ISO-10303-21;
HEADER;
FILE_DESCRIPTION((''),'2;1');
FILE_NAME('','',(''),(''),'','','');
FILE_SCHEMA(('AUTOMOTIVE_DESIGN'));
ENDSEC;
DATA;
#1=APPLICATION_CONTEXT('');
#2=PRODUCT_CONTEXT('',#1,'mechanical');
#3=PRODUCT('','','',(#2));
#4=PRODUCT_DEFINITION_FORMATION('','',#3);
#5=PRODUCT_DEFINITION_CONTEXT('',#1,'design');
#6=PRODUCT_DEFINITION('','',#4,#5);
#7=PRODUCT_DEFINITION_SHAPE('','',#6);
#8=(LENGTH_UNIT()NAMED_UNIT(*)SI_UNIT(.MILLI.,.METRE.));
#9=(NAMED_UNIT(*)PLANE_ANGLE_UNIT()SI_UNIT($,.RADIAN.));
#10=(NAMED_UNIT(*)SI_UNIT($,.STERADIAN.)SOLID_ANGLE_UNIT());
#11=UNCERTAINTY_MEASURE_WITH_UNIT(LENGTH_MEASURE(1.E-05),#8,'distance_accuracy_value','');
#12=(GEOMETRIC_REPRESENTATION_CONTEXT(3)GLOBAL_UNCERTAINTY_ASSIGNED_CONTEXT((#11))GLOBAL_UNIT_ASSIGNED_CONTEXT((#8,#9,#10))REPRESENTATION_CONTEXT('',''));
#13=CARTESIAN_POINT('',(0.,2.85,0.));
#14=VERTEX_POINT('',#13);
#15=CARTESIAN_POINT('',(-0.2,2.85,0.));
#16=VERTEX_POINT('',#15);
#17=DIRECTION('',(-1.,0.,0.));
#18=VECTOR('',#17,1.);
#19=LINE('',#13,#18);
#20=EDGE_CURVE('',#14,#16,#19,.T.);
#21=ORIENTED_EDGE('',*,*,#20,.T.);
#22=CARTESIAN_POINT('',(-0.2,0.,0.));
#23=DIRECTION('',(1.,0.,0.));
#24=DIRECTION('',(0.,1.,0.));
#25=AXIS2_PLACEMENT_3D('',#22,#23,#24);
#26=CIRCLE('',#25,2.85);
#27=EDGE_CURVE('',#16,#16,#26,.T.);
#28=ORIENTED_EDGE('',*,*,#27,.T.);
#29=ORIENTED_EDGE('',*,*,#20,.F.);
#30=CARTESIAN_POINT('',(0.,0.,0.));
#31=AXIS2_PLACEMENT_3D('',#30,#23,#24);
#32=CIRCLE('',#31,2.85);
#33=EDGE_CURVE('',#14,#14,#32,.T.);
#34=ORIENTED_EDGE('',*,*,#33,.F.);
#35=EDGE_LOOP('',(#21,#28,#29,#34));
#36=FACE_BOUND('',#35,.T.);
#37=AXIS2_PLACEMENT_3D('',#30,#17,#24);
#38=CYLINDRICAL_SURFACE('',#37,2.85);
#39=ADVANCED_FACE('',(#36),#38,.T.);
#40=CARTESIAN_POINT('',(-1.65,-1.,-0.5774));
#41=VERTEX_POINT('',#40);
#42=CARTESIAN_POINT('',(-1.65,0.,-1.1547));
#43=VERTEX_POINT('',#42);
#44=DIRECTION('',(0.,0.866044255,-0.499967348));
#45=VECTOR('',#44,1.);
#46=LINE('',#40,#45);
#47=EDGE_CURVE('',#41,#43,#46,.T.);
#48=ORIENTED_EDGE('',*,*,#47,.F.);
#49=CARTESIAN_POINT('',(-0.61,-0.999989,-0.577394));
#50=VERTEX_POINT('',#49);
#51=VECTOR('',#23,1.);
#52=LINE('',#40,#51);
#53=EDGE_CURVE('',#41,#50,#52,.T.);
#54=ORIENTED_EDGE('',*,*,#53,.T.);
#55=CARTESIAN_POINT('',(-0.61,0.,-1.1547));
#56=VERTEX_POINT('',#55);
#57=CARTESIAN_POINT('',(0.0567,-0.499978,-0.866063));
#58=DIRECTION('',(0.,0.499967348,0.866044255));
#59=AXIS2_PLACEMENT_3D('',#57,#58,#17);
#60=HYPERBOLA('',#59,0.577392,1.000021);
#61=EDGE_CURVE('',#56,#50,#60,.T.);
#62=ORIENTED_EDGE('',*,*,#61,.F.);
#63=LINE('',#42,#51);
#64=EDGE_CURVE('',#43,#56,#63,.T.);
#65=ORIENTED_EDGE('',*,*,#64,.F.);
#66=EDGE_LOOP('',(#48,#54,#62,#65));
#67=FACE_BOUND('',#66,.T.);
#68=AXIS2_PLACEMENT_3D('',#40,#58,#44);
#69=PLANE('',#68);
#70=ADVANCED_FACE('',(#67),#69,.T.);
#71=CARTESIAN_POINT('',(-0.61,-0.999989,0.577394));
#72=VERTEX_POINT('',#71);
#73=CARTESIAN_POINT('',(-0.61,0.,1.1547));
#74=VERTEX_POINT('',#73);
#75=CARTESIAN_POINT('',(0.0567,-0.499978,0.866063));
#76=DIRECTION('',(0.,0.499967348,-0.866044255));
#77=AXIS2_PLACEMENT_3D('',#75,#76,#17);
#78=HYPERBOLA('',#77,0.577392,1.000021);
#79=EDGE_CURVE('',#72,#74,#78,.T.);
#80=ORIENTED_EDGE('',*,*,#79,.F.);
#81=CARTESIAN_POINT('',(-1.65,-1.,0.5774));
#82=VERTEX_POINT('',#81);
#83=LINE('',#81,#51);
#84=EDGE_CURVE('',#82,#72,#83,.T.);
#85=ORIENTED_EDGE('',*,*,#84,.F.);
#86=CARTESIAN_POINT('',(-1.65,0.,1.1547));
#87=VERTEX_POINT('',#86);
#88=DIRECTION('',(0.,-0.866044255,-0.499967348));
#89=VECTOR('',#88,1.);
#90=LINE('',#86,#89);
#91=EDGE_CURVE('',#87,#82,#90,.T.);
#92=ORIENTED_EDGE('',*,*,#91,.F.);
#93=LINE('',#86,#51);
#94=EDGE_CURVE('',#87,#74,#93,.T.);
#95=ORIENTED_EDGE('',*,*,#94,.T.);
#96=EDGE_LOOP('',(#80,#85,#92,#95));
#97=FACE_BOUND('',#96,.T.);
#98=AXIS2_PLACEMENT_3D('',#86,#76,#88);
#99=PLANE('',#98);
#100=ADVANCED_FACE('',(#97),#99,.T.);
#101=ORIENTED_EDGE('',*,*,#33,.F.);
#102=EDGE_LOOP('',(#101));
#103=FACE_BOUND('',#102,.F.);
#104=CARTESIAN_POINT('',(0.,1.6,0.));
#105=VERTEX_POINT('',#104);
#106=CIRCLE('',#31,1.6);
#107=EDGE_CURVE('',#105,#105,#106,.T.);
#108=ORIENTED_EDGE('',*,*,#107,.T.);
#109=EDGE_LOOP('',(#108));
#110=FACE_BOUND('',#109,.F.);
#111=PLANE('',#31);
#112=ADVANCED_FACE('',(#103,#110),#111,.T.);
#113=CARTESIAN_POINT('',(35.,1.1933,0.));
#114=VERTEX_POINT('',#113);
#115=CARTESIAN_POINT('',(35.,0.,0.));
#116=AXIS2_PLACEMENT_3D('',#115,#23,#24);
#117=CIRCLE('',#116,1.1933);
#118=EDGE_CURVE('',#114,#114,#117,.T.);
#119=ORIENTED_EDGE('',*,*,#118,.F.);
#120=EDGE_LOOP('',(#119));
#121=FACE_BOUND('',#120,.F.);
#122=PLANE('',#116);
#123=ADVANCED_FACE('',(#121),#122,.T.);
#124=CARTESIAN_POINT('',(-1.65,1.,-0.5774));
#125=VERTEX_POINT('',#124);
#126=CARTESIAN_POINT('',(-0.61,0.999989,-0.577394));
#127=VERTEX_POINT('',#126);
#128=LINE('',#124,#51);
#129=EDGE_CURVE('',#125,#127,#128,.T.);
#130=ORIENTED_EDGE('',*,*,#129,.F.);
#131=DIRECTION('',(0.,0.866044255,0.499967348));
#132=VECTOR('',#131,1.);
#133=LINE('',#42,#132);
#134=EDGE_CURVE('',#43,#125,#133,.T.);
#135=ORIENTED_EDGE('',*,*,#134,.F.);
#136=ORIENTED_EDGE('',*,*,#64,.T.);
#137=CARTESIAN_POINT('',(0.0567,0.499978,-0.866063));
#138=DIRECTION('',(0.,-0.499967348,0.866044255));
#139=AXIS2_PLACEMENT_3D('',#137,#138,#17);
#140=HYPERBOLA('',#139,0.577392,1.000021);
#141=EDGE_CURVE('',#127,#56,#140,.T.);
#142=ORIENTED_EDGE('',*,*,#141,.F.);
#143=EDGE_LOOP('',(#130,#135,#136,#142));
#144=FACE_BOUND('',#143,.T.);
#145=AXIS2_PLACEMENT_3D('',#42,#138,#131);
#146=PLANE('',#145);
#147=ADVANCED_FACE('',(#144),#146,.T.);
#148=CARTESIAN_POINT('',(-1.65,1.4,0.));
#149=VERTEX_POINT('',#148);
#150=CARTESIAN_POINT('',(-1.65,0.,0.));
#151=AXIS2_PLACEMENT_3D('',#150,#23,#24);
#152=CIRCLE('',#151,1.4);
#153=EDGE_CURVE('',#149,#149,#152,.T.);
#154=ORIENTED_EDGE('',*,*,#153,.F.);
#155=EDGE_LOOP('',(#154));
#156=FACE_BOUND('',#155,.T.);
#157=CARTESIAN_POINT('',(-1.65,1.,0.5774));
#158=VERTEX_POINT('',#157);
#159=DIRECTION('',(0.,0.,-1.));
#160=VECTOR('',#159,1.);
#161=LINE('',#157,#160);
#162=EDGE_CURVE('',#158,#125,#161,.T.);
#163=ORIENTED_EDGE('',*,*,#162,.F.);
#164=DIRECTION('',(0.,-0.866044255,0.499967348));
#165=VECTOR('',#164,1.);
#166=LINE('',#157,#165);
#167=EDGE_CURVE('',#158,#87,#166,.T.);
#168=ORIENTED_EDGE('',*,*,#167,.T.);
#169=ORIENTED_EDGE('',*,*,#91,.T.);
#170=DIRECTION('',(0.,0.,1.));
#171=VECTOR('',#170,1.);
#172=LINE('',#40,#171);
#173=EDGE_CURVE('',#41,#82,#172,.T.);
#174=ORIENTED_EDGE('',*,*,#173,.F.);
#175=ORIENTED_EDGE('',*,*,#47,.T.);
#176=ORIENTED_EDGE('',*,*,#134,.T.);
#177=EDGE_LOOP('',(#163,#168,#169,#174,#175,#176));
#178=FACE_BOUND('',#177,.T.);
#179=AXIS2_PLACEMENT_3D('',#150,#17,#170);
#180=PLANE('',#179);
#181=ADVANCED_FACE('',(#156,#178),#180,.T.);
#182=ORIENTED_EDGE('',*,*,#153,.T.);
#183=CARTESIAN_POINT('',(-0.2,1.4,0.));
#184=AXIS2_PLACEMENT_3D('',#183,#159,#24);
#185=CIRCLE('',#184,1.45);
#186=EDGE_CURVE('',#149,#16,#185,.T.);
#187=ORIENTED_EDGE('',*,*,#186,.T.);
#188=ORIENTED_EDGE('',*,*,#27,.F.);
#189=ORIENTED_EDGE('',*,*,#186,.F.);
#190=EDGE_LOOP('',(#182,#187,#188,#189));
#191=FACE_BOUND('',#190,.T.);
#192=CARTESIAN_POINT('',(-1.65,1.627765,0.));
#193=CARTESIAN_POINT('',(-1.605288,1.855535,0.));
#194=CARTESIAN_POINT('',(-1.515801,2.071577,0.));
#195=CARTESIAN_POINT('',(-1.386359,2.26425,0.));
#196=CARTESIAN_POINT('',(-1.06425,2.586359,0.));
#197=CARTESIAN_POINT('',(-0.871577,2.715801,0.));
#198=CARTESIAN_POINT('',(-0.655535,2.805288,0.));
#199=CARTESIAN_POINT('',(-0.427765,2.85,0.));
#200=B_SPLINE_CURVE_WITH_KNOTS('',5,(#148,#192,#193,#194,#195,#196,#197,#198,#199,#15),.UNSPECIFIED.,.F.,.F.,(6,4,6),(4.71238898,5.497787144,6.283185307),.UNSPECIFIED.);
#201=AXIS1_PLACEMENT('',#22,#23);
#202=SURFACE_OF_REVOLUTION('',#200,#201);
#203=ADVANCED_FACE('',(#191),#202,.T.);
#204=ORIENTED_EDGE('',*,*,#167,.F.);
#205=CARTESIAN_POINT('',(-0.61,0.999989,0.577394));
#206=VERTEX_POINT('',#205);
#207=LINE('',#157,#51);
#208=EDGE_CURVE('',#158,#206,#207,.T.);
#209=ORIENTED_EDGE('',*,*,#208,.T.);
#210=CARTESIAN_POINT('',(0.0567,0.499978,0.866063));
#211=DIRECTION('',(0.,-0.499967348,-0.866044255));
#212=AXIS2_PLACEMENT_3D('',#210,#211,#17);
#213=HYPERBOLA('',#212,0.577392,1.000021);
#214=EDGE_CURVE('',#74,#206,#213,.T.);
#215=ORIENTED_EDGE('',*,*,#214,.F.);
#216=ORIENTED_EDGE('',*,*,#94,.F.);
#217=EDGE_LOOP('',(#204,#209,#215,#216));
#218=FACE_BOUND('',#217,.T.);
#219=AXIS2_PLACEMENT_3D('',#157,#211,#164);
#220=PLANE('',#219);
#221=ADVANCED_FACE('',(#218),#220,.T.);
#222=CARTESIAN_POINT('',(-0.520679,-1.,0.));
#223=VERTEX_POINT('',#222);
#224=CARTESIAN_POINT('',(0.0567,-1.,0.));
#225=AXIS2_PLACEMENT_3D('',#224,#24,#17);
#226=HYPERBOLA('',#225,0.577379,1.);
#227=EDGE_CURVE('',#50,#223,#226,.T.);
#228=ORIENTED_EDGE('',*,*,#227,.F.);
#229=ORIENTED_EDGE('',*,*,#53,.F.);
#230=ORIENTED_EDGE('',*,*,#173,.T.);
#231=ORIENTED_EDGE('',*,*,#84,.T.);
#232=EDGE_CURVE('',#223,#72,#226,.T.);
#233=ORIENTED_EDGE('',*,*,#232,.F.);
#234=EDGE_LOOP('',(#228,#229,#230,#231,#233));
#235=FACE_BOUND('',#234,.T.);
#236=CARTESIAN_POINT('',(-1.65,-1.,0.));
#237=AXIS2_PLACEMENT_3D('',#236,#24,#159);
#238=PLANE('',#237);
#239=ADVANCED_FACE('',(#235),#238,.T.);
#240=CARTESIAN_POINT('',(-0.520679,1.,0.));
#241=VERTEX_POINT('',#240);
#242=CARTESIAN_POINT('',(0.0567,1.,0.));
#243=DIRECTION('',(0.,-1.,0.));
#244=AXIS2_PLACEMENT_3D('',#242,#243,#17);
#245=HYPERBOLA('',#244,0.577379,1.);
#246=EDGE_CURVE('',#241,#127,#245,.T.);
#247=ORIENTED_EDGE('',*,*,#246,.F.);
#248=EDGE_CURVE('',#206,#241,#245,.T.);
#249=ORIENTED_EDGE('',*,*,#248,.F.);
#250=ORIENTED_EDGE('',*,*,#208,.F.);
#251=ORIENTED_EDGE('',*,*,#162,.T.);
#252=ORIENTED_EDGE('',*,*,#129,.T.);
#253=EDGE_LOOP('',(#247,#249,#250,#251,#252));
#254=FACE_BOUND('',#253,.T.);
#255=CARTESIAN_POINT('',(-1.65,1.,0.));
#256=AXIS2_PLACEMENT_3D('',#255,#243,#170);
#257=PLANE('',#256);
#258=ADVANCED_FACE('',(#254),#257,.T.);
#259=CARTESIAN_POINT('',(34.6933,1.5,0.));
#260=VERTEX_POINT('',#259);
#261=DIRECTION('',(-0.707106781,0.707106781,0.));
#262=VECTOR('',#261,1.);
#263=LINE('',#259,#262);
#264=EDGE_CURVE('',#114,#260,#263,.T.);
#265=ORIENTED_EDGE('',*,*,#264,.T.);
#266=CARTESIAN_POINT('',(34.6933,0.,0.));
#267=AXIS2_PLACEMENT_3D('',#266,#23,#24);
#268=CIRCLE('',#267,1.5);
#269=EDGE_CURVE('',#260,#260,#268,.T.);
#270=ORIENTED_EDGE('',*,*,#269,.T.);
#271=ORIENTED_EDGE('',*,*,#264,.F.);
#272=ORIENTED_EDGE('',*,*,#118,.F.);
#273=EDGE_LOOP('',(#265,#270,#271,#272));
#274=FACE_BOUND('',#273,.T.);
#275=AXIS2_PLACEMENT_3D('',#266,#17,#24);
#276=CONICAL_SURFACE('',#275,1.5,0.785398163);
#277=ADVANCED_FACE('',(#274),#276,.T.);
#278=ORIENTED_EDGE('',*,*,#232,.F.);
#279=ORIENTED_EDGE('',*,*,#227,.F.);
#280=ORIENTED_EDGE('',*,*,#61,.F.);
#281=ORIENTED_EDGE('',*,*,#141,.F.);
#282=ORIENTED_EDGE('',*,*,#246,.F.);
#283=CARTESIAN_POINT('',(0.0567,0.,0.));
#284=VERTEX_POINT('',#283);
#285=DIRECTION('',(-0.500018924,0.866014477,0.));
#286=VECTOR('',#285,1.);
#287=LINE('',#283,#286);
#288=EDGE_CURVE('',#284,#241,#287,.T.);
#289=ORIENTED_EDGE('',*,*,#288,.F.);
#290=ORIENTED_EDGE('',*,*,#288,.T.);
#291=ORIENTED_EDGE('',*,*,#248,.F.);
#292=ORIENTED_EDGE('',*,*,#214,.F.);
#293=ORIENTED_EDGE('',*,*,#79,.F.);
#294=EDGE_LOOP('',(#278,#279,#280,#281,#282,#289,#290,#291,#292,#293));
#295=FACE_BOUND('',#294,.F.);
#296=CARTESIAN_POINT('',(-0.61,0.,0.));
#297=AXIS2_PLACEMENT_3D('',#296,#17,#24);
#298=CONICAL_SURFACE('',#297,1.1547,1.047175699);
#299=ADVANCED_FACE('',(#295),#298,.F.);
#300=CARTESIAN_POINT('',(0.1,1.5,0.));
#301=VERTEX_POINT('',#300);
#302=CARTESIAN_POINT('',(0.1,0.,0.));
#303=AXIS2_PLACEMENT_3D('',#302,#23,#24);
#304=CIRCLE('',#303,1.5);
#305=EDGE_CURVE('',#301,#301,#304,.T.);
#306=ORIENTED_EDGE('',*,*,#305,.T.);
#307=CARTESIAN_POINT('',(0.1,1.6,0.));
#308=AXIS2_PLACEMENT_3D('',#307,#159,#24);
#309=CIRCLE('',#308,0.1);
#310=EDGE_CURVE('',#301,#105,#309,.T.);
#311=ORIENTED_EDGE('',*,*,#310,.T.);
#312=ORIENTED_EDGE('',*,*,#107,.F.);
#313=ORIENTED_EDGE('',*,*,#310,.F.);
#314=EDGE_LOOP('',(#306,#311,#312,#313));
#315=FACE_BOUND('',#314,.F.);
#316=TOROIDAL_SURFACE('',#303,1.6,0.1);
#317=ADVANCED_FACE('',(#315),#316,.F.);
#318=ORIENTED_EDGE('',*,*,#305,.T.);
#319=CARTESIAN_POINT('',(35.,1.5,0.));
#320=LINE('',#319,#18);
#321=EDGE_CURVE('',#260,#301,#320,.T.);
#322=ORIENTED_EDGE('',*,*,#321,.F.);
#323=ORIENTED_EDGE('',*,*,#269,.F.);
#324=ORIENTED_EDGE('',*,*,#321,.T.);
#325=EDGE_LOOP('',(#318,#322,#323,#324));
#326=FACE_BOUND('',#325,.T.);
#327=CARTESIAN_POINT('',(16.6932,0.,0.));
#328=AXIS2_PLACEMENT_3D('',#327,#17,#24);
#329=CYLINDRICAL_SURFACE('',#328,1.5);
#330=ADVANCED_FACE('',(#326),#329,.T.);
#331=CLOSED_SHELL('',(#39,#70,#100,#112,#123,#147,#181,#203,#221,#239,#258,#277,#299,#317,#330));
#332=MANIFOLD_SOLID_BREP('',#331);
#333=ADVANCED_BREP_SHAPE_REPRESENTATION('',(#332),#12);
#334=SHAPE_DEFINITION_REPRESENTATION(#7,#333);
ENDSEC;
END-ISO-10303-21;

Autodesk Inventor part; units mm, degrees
ref_plane "YZ Plane" through (0, 0, 0) normal (1, 0, 0) x (0, 1, 0)
ref_plane "XZ Plane" through (0, 0, 0) normal (0, 1, 0) x (-1, 0, 0)
sketch "Sketch1" plane through (0, 0, 0) normal (0, 0, 1) x (1, 0, 0)
  line L0 (0.0567, 0) -> (35, 0)
  line L1 (35, 0) -> (35, 1.5)
  line L2 (35, 1.5) -> (17, 1.5)
  line L3 (17, 1.5) -> (16.6932, 1.5)
  line L4 (16.6932, 1.5) -> (0, 1.5)
  line L5 (0, 1.5) -> (0, 2.85)
  line L6 (0, 2.85) -> (-1.65, 2.85)
  line L7 (-1.65, 2.85) -> (-1.65, 1.1547)
  line L8 (-1.65, 1.1547) -> (-0.61, 1.1547)
  line L9 (-0.61, 1.1547) -> (0.0567, 0)
  line L10 (-7.98, 0) -> (36.33, 0) projected
  line L11 (0, -0.57) -> (0, 3.42) projected
  line L12 (17, 1.5) -> (0, 1.5) construction
  dimension "d1" = 18
  dimension "d2" = 0.3068
  dimension "d3" = 1.65
  dimension "d4" = 1.04
  dimension "d5" = 60
  dimension "d6" = 3
  dimension "d7" = 3
  dimension "d8" = 2.3094
  dimension "d9" = 5.7
  dimension "d26" = 35
revolve "Body" add sketch "Sketch1" angle 360 about axis through (0.0567, 0, 0) along (1, 0, 0) contours L9 L11 L4 L3 L2 L1 L0 | L9 L8 L7 L6 L5 L11
sketch "Sketch2" plane through (-1.65, 0, 0) normal (-1, 0, 0) x (0, 0, 1)
  circle A0 centre (0, 0) radius 1.1547 projected
  line L0 (0, -3.99) -> (0, 3.99) projected
  line L1 (-3.99, 0) -> (3.99, 0) projected
  line L2 (1.1547, 0) -> (0.5774, -1)
  line L3 (0.5774, -1) -> (-0.5774, -1)
  line L4 (-0.5774, -1) -> (-1.1547, 0)
  line L5 (-1.1547, 0) -> (-0.5774, 1)
  line L6 (-0.5774, 1) -> (0.5774, 1)
  line L7 (0.5774, 1) -> (1.1547, 0)
extrude "Slot" add sketch "Sketch2" against normal up to next contours L7 A0 | A0 L2 | L6 L0 A0 | A0 L0 L3 | L0 L6 A0 | A0 L3 L0 | L4 A0 | A0 L5
fillet "Fillet1" radius 1.45 1 edges at (-1.65, -2.85, 0)
thread "Thread" size "M3x0.5" class "6g" standard "ISO Metric profile" length 18
chamfer "Chamfer1" distance 0.3067 distance2 0.3067 1 edges at (35, -1.5, 0) measured on face at (35, -0.8773, -0.3972)
ref_plane "Work Plane1" through (29, 0, 0) normal (0, -1, 0) x (1, 0, 0)
fillet "Fillet2" radius 0.1 1 edges at (0, -1.5, 0)
equation "\"d30\" = R"
equation "\"d17\" = RR"
equation "\"d13\" = GEL"
equation "\"d15\" = -0.5 * SPD + 0.5 * GD"
equation "\"d16\" = GUL"
equation "\"d1\" = GEL"
equation "\"d3\" = KOH"
equation "\"d4\" = INTI"
equation "\"d6\" = GD"
equation "\"d7\" = BDM"
equation "\"d8\" = 1.1547 * SW"
equation "\"d9\" = KOD"
equation "\"d26\" = NLG"
equation "\"GD\" = NND"
equation "\"NLG\" = 35"
equation "\"GEL\" = 18"
equation "\"KOD\" = 5.7"
equation "\"KOH\" = 1.65"
equation "\"INTI\" = 1.04"
equation "\"GAL\" = 0.61345 * PTC"
equation "\"GUL\" = 0.61345 * PTC"
equation "\"BDM\" = NND"
equation "\"SW\" = 2"
equation "\"RR\" = 1.45"
equation "\"SPD\" = NND - 1.2269 * PTC"
equation "\"R\" = 0.1"
equation "\"TOA\" = 30deg"
equation "\"GD1\" = THREADDIA - 1.2269 * PTC"
equation "\"THREADDIA\" = 3"
equation "\"PTC\" = 0.5"
equation "\"NND\" = 3"
equation "\"KOH1\" = 0.2"
equation "\"E0\" = 2.303"
properties part number "ISO 7380-1 - M3 x 30" material "Steel"
